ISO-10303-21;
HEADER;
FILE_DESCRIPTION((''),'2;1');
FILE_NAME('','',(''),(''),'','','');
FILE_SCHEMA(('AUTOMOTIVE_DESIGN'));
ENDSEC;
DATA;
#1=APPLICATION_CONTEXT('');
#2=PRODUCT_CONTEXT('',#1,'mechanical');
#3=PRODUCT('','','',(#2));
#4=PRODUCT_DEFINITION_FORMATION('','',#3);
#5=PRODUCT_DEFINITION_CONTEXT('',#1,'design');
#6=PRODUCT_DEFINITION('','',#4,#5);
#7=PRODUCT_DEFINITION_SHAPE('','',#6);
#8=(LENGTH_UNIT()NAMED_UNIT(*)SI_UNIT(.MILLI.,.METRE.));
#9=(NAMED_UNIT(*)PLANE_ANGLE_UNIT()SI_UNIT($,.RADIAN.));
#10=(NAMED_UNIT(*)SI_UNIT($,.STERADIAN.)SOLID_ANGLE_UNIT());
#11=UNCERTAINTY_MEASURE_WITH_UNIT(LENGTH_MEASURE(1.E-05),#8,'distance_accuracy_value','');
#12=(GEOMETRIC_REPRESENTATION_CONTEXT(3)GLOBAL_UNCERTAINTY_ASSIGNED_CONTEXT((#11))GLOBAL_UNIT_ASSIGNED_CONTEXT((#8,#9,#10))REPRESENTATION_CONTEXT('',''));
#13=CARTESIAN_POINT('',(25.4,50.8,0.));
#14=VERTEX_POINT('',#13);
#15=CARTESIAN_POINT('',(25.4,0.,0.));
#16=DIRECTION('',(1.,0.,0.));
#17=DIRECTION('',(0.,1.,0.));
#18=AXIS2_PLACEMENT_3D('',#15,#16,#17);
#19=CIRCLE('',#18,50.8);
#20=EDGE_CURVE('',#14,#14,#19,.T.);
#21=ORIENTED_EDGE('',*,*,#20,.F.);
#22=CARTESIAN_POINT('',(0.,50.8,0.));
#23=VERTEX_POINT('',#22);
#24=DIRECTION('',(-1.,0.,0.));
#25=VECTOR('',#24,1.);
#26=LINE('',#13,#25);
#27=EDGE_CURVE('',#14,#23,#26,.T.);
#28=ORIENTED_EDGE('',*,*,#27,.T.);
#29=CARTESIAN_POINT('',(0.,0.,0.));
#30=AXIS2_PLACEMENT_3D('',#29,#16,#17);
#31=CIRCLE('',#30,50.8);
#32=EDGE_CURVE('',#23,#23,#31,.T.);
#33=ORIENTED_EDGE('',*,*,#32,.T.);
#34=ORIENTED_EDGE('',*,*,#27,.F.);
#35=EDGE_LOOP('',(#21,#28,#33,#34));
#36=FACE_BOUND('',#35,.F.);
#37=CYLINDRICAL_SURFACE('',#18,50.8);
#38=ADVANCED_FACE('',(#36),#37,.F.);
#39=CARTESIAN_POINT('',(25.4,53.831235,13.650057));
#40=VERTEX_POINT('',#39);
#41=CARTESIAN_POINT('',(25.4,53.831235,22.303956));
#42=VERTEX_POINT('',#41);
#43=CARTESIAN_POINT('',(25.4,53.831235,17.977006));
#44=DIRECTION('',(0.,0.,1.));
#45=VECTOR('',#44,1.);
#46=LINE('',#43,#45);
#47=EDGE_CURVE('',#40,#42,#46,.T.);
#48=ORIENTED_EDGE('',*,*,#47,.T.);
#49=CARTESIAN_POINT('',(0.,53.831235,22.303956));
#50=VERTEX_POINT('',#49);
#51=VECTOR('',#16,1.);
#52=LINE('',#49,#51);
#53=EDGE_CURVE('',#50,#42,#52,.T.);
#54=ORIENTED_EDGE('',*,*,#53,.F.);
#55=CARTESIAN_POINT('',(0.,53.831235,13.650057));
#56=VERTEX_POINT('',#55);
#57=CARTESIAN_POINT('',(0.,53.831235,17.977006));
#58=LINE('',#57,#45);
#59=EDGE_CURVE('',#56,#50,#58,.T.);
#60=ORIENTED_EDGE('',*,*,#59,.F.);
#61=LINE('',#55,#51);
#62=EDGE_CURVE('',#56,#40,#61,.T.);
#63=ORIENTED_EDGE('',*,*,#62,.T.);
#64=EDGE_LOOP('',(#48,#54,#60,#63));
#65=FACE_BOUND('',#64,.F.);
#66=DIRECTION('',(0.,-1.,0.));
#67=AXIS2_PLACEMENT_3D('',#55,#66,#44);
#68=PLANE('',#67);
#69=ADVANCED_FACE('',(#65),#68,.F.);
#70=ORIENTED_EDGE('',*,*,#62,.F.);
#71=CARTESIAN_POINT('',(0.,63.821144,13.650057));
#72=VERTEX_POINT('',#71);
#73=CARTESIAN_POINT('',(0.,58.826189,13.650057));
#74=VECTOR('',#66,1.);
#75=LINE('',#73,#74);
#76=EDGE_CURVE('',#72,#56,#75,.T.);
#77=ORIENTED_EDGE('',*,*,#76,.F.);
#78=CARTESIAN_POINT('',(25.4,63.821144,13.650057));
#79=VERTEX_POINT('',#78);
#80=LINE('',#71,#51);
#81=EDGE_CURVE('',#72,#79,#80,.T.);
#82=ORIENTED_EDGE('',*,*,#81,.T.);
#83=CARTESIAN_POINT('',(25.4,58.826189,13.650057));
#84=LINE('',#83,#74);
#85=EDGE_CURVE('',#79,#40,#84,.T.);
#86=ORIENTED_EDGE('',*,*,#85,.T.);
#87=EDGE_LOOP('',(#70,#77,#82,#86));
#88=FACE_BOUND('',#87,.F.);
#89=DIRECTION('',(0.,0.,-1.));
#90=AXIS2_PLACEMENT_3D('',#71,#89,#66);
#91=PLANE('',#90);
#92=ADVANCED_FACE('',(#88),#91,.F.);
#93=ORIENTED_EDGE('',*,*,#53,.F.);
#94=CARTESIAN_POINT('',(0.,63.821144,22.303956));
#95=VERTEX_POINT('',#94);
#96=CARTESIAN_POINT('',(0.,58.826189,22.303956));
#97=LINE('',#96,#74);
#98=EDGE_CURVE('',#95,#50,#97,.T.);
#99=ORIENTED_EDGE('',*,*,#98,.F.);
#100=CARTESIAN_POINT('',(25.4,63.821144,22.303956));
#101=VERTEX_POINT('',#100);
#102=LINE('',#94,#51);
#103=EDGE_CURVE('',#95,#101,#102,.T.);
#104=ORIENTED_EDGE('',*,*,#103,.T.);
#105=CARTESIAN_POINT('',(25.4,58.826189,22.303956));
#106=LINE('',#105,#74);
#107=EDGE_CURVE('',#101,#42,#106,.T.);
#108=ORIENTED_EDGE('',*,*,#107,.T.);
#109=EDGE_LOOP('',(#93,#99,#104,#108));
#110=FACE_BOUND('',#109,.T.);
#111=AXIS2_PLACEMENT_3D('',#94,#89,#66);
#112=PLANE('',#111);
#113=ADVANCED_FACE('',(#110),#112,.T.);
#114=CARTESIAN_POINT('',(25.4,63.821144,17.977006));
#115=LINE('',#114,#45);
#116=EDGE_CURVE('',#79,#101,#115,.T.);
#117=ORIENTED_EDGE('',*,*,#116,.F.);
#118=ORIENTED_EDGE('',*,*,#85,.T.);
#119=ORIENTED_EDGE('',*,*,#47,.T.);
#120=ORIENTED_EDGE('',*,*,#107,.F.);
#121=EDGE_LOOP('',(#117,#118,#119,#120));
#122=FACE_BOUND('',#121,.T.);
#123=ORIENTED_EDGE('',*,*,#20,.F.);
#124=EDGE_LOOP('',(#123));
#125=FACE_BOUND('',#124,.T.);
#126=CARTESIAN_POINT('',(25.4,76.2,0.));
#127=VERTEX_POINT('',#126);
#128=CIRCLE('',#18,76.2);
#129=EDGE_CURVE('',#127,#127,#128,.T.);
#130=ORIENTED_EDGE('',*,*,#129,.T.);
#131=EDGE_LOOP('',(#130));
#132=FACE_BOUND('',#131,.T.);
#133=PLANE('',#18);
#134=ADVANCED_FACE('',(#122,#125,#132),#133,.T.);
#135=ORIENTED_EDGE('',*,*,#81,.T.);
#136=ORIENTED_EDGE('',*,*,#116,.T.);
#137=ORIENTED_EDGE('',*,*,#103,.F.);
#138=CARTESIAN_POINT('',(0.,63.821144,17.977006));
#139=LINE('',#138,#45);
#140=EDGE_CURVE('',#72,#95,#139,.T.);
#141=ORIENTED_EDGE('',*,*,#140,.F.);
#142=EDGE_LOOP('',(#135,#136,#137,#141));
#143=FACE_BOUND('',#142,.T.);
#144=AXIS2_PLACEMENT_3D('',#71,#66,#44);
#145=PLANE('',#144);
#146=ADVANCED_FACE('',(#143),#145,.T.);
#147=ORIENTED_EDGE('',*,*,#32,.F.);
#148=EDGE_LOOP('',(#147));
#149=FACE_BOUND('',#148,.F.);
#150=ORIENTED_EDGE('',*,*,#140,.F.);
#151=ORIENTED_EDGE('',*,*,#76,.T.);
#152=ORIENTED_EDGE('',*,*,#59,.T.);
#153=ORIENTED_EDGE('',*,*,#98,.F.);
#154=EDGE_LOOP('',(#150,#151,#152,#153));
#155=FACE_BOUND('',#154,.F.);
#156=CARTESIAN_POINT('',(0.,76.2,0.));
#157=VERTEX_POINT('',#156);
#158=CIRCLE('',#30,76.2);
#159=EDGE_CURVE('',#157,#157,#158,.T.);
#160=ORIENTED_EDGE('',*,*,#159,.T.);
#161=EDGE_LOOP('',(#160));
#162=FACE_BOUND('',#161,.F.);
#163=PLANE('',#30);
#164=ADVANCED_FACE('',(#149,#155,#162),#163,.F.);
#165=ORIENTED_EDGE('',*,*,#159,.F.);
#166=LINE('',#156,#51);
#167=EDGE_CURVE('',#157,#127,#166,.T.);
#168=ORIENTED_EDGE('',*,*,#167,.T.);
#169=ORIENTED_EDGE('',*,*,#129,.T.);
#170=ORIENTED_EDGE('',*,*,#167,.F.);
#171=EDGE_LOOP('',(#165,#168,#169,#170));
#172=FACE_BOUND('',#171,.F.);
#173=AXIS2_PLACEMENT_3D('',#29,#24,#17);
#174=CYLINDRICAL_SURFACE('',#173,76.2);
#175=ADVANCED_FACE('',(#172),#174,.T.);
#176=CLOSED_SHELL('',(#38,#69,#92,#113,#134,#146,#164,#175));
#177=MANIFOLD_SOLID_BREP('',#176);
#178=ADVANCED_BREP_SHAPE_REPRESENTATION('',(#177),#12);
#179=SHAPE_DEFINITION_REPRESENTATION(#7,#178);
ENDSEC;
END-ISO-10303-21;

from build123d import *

# Parameters (mm, degrees)
F0_R     = 76.2
F1_DEPTH = 25.4
F2_R     = 50.8
F3_DEPTH = 25.4
F4_W     = 9.9899098277
F4_H     = 8.6538987234
F5_DEPTH = 25.4


# Not quite as in the source:
# - a feature names something its author has since deleted; it is built from what else it names


with BuildPart() as f1:
    # F0 (on Right) → F1 (new body)
    with BuildSketch(Plane.YZ):
        Circle(F0_R)
    extrude(amount=F1_DEPTH)

    # F2 (on face) → F3 (cut)
    with BuildSketch(Plane.YZ.offset(25.4)):
        Circle(F2_R)
    extrude(amount=-F3_DEPTH, mode=Mode.SUBTRACT)

    # F4 (on face) → F5 (cut)
    with BuildSketch(Plane(origin=(0, 0, 0), x_dir=(0, -1, 0), z_dir=(-1, 0, 0))):
        with Locations((-58.8261894882, 17.9770062678)):
            Rectangle(F4_W, F4_H)
    extrude(amount=-F5_DEPTH, mode=Mode.SUBTRACT)


solid = f1.part
